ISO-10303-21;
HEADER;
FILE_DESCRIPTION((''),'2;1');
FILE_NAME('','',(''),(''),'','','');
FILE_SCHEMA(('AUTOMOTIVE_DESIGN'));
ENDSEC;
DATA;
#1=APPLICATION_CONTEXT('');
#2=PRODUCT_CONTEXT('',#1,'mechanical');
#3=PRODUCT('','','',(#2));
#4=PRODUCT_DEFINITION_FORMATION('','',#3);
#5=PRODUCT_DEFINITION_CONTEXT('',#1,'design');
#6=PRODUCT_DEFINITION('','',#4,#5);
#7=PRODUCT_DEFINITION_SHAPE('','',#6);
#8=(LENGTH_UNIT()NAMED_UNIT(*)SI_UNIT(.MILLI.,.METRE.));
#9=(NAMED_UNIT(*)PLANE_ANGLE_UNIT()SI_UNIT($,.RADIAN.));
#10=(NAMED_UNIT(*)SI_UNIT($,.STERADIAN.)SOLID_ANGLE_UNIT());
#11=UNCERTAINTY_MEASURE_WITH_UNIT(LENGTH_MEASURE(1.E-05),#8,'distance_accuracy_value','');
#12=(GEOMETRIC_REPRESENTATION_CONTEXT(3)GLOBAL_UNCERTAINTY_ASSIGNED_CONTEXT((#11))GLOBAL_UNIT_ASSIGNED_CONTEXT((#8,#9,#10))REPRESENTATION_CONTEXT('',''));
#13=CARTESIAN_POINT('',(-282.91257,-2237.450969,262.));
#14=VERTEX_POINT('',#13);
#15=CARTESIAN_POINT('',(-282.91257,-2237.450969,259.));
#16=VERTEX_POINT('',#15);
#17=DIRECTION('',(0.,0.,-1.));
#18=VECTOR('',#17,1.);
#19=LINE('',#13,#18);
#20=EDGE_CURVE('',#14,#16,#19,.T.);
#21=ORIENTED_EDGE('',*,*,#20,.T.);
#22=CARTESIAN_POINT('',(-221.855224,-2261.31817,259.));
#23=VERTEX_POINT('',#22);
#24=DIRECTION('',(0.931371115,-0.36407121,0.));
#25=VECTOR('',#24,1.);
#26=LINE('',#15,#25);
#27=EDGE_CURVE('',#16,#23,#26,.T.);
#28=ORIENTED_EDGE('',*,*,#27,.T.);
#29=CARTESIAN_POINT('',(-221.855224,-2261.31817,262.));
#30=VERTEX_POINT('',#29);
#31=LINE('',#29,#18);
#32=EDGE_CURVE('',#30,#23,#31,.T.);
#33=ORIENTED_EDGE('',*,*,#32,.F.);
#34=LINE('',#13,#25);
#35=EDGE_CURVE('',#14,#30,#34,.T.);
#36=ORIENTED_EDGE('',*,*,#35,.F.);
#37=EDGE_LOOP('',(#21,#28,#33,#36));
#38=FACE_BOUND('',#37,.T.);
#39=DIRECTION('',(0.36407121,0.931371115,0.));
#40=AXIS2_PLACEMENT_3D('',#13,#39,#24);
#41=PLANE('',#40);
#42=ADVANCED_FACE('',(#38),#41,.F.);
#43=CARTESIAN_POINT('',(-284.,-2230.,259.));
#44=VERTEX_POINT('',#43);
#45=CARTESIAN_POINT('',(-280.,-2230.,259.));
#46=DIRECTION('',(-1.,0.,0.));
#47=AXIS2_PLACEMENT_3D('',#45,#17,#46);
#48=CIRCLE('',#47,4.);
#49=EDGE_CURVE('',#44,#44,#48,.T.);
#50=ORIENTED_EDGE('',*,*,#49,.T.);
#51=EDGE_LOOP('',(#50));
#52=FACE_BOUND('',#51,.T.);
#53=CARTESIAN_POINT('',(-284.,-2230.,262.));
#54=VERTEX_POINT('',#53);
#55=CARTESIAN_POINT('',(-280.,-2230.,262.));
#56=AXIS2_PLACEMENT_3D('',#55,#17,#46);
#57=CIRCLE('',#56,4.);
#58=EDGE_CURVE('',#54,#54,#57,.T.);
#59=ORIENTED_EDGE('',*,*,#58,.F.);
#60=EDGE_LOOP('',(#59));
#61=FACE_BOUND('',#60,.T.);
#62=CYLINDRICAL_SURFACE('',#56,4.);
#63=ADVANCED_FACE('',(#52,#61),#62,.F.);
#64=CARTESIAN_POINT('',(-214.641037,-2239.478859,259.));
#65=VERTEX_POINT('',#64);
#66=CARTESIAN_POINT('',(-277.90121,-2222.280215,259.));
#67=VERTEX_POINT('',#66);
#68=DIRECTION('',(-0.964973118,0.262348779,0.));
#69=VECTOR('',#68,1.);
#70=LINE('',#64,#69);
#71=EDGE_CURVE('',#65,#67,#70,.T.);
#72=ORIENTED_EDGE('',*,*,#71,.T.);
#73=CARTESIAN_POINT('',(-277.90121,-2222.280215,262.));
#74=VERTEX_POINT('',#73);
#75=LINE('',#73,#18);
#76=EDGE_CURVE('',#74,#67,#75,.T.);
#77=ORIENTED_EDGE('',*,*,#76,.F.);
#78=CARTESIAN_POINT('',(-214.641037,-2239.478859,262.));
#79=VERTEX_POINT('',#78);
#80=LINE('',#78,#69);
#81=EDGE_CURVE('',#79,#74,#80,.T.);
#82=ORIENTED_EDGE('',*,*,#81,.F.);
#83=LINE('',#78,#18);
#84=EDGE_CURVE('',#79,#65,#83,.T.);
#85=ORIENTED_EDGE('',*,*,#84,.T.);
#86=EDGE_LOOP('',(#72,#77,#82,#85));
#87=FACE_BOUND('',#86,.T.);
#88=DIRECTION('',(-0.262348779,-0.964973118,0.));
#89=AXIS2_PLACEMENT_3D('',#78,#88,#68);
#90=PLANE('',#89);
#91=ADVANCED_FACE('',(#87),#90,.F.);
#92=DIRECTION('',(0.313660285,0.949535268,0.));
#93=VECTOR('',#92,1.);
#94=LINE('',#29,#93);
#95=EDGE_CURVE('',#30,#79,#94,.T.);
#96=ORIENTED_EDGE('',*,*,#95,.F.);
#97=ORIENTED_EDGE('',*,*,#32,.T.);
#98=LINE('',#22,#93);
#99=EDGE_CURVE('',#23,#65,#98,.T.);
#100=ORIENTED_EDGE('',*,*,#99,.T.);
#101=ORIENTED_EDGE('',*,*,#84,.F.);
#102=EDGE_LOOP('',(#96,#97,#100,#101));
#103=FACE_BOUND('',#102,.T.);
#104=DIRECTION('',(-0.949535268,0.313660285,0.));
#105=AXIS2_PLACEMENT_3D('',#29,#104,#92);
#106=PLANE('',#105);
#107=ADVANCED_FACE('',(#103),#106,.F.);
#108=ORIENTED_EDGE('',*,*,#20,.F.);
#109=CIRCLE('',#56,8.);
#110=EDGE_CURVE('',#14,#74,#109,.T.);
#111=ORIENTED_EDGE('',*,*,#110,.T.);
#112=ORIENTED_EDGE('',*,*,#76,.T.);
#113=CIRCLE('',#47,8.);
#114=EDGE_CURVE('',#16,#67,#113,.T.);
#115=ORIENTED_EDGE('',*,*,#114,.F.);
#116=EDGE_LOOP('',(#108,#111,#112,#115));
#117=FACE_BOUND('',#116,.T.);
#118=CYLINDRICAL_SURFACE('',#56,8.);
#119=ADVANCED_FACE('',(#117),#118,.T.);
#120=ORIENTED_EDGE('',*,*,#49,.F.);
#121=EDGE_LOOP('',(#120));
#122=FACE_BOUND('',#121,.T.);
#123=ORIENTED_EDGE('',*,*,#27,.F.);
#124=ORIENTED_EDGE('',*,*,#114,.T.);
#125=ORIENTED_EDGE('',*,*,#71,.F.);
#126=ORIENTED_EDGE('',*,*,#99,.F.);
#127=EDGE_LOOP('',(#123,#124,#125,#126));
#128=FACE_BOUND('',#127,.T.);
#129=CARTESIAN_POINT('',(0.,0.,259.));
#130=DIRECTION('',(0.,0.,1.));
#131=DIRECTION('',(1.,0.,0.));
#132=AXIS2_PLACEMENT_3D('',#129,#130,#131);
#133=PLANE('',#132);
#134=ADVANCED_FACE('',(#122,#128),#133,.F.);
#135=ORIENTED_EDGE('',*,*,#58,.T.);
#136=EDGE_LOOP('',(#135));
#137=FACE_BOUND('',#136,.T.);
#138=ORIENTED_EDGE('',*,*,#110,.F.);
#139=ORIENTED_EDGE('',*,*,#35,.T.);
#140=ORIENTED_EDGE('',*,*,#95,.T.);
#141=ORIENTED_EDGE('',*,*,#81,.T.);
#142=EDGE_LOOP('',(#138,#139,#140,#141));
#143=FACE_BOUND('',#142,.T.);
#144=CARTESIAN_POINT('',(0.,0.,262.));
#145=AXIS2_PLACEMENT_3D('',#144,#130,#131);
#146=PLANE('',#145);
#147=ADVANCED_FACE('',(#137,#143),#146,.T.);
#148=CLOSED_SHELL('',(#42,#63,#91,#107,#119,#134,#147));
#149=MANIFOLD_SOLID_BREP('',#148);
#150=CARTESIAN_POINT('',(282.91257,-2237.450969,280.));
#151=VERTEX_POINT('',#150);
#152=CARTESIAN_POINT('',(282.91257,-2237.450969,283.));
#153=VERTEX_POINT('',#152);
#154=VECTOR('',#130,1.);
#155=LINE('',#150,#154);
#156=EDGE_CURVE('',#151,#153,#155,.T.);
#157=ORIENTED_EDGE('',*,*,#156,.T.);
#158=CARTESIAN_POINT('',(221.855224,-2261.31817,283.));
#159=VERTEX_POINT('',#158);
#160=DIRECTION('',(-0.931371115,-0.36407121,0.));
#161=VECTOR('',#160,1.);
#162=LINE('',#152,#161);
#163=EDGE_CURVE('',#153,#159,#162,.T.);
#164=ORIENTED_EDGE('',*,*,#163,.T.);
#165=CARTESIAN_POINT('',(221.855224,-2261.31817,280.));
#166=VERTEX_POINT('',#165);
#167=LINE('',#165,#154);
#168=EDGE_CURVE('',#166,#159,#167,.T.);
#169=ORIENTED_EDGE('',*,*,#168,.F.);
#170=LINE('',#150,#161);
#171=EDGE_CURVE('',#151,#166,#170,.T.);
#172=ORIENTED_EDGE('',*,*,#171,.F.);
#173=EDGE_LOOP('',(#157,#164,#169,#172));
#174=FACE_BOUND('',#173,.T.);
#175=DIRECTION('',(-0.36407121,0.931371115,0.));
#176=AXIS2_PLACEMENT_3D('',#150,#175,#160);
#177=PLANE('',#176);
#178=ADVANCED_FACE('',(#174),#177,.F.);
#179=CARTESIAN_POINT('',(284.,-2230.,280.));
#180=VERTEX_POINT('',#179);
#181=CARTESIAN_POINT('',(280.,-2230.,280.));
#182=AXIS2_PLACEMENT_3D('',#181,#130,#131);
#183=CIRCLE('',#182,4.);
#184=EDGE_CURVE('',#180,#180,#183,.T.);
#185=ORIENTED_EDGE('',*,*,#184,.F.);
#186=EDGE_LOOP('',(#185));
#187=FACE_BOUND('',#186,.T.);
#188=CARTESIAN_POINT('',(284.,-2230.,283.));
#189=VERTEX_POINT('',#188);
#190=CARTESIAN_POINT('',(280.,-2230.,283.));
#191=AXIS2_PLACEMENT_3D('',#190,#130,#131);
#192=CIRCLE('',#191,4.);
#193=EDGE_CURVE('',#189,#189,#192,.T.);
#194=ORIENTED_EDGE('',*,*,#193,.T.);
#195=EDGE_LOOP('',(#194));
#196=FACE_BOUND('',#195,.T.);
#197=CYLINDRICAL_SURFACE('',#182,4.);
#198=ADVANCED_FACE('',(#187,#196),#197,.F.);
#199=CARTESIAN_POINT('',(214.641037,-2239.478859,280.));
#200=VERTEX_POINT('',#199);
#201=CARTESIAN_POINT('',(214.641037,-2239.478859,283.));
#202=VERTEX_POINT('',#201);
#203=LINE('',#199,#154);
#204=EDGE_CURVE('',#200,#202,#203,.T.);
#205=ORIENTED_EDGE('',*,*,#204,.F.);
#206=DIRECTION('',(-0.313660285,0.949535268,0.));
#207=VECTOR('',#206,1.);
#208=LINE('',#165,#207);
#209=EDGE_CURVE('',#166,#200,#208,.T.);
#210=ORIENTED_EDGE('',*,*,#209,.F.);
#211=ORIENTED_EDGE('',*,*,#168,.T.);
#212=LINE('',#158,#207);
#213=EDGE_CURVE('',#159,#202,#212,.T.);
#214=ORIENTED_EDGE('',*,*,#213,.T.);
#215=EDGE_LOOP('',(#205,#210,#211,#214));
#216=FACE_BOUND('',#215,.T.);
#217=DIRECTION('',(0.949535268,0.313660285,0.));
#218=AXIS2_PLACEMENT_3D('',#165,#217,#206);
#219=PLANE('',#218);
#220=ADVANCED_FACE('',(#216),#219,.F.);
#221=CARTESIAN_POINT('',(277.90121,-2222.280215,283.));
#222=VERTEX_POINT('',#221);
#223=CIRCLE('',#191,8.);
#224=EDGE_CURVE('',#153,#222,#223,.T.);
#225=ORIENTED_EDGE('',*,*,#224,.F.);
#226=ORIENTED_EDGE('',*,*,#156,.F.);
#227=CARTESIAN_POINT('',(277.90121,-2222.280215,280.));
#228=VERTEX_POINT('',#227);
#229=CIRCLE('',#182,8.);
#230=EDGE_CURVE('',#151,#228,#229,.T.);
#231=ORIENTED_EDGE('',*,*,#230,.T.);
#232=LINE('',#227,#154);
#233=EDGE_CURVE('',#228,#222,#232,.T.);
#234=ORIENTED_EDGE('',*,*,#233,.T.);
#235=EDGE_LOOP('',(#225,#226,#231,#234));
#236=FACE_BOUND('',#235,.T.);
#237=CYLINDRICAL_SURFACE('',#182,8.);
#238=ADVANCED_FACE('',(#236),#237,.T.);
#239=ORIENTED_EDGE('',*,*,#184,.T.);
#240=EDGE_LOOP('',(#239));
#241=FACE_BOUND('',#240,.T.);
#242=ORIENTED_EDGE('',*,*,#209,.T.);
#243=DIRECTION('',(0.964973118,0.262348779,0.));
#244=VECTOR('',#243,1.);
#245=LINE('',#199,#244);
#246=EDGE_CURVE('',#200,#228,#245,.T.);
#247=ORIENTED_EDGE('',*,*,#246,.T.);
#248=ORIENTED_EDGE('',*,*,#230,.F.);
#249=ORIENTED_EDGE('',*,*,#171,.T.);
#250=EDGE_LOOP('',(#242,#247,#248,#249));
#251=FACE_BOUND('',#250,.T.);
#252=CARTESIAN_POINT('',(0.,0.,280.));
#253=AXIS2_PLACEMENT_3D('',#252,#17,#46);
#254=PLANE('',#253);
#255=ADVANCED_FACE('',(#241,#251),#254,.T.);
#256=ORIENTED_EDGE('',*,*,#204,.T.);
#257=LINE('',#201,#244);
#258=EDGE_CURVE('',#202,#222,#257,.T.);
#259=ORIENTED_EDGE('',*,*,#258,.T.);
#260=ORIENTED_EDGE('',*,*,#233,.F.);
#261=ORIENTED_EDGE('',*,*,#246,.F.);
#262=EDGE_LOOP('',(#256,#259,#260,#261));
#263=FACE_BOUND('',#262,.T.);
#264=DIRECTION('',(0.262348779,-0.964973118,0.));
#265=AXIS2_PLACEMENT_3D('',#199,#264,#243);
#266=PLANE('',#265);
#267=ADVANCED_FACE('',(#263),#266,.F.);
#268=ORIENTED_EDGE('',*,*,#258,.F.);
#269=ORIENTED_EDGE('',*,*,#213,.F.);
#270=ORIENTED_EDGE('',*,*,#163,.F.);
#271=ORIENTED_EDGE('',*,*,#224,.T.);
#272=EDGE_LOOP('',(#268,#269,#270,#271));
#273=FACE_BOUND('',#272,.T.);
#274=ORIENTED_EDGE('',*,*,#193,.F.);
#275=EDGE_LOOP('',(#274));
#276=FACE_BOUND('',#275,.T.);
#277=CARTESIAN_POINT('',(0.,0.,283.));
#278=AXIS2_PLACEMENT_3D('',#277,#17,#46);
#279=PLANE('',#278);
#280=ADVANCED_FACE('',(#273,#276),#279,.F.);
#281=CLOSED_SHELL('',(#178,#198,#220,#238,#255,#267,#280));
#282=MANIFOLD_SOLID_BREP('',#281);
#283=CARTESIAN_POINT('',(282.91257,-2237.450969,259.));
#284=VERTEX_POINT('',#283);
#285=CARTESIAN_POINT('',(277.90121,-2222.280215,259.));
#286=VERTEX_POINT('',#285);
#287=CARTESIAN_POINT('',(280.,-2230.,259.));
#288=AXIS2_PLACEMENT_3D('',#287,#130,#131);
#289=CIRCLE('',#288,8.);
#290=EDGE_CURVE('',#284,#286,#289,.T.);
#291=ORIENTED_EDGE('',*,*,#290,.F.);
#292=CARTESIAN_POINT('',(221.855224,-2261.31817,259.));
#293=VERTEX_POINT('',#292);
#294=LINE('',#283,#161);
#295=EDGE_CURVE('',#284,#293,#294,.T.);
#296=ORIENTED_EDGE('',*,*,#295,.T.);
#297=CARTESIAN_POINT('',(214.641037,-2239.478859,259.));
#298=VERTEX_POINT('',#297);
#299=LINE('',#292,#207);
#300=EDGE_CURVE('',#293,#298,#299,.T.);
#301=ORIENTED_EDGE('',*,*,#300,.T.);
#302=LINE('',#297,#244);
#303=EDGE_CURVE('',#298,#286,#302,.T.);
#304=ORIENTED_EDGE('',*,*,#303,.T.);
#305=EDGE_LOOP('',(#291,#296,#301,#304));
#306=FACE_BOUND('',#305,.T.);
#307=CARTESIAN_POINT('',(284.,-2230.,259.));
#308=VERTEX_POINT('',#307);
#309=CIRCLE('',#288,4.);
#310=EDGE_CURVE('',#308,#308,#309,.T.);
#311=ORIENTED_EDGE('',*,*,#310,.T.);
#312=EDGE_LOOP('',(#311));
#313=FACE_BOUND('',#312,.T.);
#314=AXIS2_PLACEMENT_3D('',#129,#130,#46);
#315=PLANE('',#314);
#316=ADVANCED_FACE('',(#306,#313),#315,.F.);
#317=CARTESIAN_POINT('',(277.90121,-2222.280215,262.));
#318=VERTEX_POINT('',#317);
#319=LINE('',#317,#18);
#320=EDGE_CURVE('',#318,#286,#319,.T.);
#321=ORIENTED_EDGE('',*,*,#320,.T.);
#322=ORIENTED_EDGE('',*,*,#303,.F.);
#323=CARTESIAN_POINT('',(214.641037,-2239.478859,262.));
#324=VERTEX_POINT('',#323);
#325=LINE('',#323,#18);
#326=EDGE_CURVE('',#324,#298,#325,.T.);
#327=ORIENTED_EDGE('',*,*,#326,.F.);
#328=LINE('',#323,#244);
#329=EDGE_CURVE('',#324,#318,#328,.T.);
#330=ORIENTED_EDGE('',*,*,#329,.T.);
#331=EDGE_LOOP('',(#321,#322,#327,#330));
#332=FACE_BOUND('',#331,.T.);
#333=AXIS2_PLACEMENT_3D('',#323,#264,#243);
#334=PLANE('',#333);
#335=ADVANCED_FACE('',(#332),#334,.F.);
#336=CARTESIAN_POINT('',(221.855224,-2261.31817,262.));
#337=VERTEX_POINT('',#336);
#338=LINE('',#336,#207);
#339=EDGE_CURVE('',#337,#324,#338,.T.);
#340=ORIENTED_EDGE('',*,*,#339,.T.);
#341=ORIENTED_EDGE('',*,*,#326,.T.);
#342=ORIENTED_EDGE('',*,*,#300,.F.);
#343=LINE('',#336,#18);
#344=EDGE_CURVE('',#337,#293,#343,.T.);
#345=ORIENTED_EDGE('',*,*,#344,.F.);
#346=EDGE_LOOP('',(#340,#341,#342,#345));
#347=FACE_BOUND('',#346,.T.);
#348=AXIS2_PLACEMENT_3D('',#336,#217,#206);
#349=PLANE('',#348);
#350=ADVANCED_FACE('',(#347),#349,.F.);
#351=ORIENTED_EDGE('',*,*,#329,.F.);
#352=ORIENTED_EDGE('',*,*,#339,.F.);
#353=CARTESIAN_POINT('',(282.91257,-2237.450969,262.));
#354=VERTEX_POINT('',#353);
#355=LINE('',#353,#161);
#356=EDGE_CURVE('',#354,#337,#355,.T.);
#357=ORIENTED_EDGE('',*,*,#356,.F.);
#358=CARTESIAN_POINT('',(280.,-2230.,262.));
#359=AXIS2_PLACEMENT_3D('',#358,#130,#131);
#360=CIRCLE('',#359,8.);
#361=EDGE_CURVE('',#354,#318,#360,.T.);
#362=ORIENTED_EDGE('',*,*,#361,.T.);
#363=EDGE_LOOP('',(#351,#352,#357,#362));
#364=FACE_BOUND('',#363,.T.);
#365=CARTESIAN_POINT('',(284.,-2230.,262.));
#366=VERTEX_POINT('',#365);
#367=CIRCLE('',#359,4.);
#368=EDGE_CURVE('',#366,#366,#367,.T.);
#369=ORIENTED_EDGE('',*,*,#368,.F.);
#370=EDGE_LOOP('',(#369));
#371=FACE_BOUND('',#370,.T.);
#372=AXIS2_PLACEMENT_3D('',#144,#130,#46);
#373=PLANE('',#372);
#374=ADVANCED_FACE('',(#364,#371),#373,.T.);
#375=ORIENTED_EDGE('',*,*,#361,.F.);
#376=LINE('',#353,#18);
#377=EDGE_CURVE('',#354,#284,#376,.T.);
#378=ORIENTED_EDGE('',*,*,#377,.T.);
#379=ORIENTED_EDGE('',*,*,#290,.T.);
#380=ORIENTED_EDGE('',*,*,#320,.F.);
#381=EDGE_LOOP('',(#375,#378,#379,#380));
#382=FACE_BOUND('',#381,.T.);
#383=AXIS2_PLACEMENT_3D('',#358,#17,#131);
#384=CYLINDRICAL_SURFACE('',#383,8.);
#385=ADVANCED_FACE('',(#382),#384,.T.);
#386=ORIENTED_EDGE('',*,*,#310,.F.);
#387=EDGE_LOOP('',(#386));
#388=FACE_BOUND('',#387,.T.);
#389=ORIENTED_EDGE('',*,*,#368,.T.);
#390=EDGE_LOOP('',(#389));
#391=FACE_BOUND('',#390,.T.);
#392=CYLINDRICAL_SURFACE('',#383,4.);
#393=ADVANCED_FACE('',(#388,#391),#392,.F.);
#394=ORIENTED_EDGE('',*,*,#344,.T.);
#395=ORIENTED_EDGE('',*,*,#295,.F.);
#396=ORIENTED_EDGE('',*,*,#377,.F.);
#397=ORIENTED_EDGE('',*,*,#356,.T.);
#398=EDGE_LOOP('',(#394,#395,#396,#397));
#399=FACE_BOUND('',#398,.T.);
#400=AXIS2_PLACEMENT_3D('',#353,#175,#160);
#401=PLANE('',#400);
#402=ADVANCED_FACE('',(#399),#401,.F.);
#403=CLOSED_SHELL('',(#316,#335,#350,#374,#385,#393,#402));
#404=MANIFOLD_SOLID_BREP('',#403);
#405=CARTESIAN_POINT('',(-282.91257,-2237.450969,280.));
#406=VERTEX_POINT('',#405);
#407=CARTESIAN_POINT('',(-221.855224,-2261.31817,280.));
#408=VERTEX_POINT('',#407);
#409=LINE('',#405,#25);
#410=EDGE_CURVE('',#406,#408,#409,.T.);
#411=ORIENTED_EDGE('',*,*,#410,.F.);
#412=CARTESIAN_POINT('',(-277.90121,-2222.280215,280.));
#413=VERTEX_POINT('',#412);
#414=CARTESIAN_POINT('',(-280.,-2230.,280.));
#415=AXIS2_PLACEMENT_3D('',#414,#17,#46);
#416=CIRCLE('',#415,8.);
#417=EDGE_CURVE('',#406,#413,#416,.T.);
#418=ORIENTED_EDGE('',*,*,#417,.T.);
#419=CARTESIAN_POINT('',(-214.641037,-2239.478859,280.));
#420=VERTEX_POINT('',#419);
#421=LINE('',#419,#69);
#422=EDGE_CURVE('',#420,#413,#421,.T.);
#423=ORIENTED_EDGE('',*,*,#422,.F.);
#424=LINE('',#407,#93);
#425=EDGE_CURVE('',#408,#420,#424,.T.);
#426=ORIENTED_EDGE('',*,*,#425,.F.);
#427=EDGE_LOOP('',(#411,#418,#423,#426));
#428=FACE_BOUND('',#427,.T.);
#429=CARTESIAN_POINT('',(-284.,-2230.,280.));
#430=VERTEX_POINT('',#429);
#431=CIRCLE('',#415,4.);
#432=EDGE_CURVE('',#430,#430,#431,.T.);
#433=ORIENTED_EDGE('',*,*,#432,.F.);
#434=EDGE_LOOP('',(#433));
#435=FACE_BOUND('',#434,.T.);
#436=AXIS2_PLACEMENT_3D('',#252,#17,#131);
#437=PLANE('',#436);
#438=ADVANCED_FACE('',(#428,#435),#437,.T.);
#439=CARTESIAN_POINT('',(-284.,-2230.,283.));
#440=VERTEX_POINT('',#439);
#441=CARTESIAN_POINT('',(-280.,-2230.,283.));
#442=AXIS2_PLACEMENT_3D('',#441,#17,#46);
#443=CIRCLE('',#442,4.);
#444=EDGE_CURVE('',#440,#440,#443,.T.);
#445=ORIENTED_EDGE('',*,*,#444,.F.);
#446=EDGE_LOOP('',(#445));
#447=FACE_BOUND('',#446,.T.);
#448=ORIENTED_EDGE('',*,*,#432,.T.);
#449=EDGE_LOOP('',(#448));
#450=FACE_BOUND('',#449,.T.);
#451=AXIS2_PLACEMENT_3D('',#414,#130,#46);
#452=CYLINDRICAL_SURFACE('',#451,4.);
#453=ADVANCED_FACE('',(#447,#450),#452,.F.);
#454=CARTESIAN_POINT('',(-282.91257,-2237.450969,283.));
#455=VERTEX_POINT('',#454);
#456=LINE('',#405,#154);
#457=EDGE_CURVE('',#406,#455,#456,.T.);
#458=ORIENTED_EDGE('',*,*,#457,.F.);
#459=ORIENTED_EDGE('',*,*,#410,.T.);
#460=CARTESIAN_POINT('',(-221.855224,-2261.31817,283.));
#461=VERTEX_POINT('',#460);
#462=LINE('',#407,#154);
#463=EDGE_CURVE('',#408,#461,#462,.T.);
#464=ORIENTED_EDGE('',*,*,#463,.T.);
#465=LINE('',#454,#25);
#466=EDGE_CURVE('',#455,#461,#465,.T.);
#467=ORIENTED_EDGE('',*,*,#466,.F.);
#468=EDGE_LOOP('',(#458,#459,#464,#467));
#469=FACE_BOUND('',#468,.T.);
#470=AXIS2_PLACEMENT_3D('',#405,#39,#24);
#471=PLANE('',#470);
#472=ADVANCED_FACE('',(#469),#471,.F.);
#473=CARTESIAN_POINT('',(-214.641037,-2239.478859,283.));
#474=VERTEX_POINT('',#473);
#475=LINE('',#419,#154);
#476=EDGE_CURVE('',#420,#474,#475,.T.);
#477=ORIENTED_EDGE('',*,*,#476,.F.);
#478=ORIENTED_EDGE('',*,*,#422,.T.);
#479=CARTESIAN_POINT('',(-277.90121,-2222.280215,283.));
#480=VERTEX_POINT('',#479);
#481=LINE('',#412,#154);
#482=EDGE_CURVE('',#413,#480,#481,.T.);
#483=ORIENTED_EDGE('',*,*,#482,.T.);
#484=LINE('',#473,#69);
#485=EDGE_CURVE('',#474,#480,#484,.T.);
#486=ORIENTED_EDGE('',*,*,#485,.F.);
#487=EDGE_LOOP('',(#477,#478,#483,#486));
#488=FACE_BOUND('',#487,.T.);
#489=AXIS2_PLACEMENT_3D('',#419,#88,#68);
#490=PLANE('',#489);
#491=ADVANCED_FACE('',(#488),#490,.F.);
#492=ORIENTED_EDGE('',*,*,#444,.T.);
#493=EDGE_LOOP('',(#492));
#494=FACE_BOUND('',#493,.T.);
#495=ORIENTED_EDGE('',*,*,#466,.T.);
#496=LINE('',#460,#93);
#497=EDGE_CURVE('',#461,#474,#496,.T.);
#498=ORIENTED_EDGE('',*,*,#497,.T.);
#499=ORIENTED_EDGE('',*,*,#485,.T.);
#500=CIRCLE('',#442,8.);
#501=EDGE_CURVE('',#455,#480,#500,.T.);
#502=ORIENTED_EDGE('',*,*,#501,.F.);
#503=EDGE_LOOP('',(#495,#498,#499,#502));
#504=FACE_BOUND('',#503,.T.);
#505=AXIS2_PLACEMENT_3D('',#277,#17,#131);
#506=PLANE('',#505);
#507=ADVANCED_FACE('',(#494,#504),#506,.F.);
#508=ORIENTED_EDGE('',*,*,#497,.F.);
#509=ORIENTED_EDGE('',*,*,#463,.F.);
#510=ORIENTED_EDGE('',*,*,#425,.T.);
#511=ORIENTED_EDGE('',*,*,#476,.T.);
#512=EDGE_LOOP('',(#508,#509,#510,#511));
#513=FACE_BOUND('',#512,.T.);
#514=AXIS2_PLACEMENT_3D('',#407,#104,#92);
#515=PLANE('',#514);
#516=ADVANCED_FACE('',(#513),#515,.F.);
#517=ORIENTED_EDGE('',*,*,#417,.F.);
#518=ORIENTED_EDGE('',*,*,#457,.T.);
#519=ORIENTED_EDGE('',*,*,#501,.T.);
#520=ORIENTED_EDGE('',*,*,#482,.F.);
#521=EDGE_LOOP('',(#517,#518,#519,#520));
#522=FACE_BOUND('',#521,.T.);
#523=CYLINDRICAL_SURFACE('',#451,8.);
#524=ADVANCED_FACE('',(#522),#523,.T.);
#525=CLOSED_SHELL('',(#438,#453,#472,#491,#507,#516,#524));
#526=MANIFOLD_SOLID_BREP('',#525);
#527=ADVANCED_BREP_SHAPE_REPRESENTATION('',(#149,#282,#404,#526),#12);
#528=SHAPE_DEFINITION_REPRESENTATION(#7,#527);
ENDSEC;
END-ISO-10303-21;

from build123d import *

# Parameters (mm, degrees)
BOSS_EXTRUDE1_START     = 280
BOSS_EXTRUDE1_OUTLINE_R = 4
BOSS_EXTRUDE1_DEPTH     = 3


# Read off the part's stored shape, not the designer's step: Boss-Extrude1
with BuildPart() as part:
    # Boss-Extrude1 outline → Boss-Extrude1 (new body)
    with BuildSketch(Plane.XY.offset(BOSS_EXTRUDE1_START)):
        with BuildLine():
            Line((221.855223646, -2261.318170185), (282.912569681, -2237.450968921))
            ThreePointArc((282.912569681, -2237.450968921), (287.596282146, -2227.490717719), (277.901209765, -2222.280215058))
            Line((277.901209765, -2222.280215058), (214.64103709, -2239.478859016))
            Line((214.64103709, -2239.478859016), (221.855223646, -2261.318170185))
        make_face()
        with Locations((280, -2230)):
            Circle(BOSS_EXTRUDE1_OUTLINE_R, mode=Mode.SUBTRACT)
    extrude(amount=BOSS_EXTRUDE1_DEPTH)


with BuildPart() as body_2:
    # Mirror1: mirrored copy
    add(part.part.mirror(Plane(origin=(0, 0, 271), x_dir=(1, 0, 0), z_dir=(0, 0, -1))))


with BuildPart() as body_3:
    # Mirror2: mirrored copy
    add(part.part.mirror(Plane(origin=(0, 0, 0), x_dir=(0, 0, 1), z_dir=(1, 0, 0))))


with BuildPart() as body_4:
    # Mirror2 2: mirrored copy
    add(body_2.part.mirror(Plane(origin=(0, 0, 0), x_dir=(0, 0, 1), z_dir=(1, 0, 0))))


solid = Compound([part.part, body_2.part, body_3.part, body_4.part])
